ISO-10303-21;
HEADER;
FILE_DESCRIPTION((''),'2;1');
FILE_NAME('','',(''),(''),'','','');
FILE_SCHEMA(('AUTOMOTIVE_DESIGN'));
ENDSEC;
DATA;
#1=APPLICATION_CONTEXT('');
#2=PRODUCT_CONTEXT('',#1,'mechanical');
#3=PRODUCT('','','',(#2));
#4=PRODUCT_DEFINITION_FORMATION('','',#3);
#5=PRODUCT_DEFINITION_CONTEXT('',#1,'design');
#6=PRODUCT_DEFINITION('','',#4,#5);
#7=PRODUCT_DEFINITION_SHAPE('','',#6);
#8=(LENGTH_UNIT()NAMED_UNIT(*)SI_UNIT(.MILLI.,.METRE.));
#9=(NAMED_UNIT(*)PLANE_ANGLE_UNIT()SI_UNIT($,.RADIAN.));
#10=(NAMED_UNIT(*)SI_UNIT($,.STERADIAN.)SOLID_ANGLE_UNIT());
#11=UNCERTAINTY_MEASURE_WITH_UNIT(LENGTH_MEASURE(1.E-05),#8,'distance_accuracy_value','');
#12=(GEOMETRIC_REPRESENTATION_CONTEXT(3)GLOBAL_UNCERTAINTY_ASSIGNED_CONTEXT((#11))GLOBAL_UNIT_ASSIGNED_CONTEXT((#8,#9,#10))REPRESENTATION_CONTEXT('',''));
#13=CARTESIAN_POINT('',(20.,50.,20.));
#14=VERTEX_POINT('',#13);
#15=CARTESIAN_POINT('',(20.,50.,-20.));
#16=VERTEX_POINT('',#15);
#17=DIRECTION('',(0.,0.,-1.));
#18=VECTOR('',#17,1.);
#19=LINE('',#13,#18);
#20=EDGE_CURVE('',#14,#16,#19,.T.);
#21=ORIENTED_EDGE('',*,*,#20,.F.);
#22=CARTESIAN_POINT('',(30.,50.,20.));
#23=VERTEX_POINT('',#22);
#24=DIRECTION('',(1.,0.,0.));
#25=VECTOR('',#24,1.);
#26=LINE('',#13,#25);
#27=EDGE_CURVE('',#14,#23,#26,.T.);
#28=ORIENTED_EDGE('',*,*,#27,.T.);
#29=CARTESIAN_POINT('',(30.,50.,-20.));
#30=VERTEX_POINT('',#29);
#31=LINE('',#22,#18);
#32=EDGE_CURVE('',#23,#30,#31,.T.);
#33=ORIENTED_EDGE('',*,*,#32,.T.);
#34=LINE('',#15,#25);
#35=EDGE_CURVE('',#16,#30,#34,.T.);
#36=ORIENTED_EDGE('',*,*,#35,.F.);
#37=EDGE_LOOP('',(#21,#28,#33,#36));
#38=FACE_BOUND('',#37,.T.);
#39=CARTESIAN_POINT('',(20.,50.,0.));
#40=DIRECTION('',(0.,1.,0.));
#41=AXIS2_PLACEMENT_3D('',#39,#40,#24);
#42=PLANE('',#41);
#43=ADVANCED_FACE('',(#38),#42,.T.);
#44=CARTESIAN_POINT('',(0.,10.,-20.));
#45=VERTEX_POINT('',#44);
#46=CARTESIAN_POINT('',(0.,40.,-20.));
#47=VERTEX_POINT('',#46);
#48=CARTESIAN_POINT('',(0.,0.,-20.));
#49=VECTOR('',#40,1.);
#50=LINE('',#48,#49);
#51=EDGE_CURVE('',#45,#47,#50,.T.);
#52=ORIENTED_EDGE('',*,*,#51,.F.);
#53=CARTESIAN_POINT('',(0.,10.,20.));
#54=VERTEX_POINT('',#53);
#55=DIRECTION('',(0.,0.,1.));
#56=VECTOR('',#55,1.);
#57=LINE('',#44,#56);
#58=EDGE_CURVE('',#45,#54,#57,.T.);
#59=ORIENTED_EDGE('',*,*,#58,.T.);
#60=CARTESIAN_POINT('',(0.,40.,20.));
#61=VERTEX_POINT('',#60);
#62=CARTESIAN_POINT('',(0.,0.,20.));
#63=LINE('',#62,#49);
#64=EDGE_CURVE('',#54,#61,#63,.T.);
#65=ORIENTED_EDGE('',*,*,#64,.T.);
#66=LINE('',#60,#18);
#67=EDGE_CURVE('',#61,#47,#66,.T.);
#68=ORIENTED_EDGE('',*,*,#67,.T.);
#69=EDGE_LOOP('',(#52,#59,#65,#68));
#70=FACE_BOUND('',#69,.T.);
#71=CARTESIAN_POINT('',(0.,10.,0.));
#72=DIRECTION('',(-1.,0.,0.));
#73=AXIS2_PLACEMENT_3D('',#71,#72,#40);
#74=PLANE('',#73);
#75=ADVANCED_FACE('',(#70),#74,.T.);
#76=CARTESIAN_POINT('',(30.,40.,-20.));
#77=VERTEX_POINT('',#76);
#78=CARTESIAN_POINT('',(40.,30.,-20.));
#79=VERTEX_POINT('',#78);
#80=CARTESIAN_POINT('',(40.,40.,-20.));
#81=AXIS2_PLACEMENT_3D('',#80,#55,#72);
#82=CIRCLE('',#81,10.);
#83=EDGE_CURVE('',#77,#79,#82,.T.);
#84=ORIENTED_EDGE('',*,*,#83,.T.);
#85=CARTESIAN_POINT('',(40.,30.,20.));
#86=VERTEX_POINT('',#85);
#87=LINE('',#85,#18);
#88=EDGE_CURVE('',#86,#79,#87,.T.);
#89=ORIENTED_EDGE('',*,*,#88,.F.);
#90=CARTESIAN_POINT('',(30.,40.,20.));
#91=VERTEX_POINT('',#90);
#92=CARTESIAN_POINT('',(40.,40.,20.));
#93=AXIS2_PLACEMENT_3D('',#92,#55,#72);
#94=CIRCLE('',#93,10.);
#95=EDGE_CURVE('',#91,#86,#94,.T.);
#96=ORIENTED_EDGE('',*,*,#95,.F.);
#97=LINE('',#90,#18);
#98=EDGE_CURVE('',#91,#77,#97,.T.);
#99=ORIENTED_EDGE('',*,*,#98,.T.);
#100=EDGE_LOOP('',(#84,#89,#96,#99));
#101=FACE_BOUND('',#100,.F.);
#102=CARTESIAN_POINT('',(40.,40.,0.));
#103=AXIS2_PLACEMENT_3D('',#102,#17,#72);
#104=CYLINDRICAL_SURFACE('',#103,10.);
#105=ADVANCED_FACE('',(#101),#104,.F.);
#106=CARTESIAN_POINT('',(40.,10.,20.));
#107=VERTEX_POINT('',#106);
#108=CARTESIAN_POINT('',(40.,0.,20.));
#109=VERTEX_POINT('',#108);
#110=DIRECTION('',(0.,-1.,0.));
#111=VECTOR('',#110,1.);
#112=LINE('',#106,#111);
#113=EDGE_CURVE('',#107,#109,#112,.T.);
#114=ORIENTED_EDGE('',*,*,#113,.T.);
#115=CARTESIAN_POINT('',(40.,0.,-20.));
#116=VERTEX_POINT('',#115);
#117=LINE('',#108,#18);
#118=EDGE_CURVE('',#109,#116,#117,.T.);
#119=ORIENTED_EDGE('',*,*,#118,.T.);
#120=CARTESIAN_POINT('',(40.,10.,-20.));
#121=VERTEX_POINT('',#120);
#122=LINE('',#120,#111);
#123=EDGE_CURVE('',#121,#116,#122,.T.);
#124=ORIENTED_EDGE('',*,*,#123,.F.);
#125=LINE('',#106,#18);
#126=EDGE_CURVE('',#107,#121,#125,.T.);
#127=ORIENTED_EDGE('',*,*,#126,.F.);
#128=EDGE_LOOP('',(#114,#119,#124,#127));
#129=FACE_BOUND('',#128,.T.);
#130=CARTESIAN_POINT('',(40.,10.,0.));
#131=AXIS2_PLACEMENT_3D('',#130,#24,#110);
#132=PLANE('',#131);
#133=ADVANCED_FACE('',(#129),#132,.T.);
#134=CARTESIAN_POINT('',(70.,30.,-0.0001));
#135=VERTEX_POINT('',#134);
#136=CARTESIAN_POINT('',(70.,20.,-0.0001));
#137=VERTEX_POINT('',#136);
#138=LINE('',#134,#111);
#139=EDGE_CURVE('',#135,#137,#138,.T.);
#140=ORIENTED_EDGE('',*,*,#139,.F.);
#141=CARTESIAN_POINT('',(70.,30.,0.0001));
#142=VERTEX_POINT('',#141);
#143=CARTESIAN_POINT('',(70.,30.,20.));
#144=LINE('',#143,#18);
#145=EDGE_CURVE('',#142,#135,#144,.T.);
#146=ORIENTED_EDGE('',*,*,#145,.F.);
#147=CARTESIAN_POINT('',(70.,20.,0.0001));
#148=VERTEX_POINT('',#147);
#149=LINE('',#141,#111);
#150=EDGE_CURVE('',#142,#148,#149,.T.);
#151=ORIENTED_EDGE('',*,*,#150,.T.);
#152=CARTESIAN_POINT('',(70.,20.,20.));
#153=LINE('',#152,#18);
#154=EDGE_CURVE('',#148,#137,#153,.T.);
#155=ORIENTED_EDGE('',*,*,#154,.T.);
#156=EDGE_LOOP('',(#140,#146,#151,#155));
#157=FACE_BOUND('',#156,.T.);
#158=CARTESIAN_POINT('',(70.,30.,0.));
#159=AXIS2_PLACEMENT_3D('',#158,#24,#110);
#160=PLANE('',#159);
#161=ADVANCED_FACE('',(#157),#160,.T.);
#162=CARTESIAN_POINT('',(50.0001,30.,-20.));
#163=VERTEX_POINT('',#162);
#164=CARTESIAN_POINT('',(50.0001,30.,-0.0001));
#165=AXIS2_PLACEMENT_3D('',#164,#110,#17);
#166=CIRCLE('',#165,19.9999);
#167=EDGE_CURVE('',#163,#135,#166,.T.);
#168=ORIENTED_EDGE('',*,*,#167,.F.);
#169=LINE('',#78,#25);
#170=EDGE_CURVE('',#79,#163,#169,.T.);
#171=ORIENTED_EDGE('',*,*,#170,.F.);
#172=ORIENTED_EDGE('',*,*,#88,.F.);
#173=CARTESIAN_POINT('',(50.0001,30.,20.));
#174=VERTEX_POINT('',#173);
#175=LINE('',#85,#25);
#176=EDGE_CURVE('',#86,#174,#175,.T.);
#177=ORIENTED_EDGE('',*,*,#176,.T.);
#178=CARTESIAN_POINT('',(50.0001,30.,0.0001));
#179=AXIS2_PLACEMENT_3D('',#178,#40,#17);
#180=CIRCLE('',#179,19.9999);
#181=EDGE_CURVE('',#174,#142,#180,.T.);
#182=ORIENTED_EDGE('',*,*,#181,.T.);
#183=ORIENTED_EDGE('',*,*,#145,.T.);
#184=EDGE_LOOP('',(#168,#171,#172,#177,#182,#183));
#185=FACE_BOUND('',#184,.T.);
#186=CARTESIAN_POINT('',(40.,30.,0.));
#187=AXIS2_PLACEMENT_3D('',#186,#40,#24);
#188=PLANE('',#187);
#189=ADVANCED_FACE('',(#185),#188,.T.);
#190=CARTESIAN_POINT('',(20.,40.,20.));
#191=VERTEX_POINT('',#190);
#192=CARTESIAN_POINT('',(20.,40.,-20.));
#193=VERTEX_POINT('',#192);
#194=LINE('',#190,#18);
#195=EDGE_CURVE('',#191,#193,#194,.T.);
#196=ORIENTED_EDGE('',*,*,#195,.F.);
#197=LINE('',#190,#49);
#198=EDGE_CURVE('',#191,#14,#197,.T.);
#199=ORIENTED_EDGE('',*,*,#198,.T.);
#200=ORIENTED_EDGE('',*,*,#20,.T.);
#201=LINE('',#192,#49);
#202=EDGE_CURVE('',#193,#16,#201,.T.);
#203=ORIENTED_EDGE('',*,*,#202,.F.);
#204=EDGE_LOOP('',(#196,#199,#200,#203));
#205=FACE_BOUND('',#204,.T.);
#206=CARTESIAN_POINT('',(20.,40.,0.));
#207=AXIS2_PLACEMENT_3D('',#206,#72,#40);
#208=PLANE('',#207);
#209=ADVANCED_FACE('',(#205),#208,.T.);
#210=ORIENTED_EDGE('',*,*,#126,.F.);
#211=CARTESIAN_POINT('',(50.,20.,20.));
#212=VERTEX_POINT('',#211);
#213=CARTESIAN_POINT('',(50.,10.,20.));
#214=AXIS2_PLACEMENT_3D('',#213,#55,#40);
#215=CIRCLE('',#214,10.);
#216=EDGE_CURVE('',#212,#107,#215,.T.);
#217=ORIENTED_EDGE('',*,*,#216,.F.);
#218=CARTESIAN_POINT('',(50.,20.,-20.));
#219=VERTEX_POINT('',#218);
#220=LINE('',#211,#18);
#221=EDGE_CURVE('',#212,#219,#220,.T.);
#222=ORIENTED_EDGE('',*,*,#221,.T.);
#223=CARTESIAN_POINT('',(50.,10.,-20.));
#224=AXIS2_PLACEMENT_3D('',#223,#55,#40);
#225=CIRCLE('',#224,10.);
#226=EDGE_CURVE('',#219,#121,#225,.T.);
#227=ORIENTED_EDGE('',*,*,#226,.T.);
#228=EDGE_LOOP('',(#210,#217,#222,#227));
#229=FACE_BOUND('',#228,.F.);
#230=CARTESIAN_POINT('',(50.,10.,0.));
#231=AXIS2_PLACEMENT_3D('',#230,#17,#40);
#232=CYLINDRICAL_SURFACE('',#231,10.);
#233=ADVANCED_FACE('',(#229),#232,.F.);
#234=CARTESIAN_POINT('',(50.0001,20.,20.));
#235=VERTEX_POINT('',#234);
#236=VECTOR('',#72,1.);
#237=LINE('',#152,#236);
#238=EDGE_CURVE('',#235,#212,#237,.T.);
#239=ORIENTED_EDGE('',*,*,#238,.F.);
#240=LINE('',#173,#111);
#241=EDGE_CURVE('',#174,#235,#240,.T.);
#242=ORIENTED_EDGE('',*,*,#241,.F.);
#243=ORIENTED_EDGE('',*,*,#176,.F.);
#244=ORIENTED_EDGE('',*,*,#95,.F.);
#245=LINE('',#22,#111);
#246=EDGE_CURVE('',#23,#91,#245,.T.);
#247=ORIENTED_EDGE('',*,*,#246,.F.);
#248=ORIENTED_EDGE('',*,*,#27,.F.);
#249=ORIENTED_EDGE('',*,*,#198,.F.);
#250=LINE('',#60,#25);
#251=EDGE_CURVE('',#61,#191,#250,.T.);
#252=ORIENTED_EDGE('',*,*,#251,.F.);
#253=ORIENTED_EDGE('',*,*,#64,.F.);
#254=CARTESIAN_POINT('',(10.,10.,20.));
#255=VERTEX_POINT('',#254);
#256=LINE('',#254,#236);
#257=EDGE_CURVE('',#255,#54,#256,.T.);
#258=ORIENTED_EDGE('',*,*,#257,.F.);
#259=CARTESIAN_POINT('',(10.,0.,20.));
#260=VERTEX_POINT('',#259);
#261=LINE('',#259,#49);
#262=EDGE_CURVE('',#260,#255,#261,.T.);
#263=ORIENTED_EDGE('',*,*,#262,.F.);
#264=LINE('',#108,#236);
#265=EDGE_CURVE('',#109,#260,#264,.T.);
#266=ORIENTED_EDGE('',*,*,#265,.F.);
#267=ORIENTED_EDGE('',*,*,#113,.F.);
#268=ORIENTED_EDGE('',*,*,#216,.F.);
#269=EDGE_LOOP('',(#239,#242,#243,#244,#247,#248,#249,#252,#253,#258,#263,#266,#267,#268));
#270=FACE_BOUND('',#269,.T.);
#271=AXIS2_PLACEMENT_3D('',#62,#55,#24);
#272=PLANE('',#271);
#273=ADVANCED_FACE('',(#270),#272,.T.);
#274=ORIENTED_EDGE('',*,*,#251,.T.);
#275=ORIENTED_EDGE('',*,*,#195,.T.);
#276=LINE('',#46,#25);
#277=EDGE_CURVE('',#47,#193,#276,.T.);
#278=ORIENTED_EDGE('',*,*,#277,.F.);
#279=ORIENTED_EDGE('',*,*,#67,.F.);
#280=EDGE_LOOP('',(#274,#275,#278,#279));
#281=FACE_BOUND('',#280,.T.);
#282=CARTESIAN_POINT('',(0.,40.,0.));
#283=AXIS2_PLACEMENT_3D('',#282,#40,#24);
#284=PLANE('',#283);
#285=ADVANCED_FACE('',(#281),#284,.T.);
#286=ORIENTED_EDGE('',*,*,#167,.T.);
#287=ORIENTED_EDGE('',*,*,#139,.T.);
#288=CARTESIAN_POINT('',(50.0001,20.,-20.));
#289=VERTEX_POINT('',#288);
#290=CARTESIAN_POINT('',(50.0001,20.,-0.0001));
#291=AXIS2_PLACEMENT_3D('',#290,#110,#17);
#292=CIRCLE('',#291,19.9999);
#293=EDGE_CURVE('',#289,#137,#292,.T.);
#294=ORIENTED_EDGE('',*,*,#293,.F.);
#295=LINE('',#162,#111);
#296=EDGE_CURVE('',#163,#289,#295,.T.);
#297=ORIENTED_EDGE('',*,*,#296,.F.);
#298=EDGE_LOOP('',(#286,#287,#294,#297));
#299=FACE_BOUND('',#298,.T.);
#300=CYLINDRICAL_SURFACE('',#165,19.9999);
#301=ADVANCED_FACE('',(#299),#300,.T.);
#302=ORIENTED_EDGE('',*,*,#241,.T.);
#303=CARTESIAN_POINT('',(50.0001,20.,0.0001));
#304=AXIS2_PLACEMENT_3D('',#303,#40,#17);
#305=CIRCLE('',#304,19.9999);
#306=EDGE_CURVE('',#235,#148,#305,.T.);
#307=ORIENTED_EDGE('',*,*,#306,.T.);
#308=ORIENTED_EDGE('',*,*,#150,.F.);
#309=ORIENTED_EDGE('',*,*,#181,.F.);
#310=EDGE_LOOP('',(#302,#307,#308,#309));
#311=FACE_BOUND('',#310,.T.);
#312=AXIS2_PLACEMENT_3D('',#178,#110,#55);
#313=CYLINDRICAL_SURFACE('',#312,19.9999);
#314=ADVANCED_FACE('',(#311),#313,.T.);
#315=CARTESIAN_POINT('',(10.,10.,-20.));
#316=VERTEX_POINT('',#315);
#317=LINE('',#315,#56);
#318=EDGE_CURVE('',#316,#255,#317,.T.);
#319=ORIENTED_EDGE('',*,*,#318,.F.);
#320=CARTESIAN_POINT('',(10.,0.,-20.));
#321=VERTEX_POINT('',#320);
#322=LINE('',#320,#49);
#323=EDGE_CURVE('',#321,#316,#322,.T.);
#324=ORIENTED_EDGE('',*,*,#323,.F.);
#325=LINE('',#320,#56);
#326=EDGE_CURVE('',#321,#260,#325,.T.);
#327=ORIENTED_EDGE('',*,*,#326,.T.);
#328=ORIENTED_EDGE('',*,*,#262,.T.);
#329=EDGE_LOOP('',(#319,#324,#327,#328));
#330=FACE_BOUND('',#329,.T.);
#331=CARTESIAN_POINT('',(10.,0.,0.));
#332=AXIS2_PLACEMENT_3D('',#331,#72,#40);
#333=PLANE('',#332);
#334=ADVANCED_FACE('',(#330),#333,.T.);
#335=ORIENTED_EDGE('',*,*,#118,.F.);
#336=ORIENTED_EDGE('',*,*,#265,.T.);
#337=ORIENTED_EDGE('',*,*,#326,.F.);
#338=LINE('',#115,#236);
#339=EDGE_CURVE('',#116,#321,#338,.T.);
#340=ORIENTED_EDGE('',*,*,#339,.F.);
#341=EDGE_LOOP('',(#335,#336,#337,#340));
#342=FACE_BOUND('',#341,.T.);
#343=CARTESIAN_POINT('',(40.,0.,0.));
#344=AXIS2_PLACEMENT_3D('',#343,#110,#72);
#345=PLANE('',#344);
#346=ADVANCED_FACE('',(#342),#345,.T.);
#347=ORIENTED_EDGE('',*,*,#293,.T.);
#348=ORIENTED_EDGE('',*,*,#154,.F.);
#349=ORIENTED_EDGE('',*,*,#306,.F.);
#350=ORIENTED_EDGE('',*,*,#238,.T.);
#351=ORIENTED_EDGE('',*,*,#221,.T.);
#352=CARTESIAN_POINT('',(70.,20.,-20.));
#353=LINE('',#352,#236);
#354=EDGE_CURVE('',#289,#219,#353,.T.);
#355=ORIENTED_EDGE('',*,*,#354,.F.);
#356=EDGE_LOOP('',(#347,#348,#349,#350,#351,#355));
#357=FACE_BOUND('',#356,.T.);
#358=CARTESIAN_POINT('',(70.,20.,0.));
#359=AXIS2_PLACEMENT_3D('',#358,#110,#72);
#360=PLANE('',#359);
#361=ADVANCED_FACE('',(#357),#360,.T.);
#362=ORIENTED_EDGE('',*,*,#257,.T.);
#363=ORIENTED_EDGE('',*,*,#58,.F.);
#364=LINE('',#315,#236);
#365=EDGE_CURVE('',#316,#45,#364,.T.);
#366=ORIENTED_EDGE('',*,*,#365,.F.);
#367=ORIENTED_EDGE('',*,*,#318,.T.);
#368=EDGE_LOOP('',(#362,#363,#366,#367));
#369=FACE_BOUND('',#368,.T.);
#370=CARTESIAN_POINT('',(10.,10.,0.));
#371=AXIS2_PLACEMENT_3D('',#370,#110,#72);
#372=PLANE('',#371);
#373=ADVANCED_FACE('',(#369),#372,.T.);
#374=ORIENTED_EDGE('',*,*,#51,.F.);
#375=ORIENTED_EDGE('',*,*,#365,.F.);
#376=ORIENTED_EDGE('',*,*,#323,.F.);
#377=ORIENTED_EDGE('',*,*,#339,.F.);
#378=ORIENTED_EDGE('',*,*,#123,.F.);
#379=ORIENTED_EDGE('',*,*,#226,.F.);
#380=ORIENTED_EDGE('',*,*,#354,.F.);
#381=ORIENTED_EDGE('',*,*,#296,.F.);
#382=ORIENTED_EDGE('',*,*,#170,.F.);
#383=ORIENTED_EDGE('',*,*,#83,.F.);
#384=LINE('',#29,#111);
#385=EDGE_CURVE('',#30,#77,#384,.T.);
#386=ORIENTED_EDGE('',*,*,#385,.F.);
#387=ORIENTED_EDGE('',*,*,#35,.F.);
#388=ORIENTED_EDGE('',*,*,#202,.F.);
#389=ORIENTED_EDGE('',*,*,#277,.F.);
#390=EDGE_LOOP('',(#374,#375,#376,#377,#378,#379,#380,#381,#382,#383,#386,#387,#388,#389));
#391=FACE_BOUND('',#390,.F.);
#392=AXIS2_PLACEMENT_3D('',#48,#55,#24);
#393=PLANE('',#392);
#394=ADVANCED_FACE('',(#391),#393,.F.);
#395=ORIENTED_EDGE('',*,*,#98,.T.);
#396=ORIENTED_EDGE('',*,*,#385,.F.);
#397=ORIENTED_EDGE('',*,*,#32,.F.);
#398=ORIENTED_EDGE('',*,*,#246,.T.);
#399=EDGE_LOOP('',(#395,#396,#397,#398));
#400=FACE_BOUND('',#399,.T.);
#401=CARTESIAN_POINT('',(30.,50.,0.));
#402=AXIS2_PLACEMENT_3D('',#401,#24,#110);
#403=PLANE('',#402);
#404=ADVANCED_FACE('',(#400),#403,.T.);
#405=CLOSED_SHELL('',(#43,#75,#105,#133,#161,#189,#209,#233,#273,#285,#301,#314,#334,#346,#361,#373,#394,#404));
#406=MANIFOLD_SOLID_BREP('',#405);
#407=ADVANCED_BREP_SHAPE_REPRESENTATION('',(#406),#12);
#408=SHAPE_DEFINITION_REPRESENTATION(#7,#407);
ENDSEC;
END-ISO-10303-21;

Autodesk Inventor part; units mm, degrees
ref_plane "YZ Plane" through (0, 0, 0) normal (1, 0, 0) x (0, 1, 0)
ref_plane "XZ Plane" through (0, 0, 0) normal (0, 1, 0) x (-1, 0, 0)
ref_plane "XY Plane" through (0, 0, 0) normal (0, 0, 1) x (1, 0, 0)
sketch "草圖1" plane through (0, 0, 0) normal (0, 0, 1) x (1, 0, 0)
  line L0 (0, 0) -> (0, 40)
  line L1 (0, 40) -> (20, 40)
  line L2 (20, 40) -> (20, 50)
  line L3 (20, 50) -> (30, 50)
  line L4 (30, 50) -> (30, 40)
  arc A0 (30, 40) -> (40, 30) centre (40, 40) ccw
  line L5 (40, 30) -> (70, 30)
  line L6 (70, 30) -> (70, 20)
  line L7 (70, 20) -> (50, 20)
  arc A1 (50, 20) -> (40, 10) centre (50, 10) ccw
  line L8 (40, 10) -> (40, 0)
  line L9 (40, 0) -> (0, 0)
  line L10 (0, 0) -> (10, 0)
  line L11 (10, 0) -> (10, 10)
  line L12 (10, 10) -> (0, 10)
  line L13 (0, 10) -> (0, 0)
  dimension "d0" = 40
  dimension "d1" = 20
  dimension "d2" = 10
  dimension "d3" = 50
  dimension "d4" = 70
  dimension "d5" = 40
  dimension "d6" = 10
  dimension "d7" = 20
  dimension "d8" = 10
  dimension "d9" = 10
  dimension "d10" = 10
extrude "擠出1" add sketch "草圖1" along normal mid plane 40 contours L0 L1 L2 L3 L4 A0 L5 L6 L7 A1 L8 L9 L11 L12
fillet "圓角1" radius 20 2 edges at (70, 25, 20) (70, 25, -20)
properties part number "21" material "鋼、碳鋼"
